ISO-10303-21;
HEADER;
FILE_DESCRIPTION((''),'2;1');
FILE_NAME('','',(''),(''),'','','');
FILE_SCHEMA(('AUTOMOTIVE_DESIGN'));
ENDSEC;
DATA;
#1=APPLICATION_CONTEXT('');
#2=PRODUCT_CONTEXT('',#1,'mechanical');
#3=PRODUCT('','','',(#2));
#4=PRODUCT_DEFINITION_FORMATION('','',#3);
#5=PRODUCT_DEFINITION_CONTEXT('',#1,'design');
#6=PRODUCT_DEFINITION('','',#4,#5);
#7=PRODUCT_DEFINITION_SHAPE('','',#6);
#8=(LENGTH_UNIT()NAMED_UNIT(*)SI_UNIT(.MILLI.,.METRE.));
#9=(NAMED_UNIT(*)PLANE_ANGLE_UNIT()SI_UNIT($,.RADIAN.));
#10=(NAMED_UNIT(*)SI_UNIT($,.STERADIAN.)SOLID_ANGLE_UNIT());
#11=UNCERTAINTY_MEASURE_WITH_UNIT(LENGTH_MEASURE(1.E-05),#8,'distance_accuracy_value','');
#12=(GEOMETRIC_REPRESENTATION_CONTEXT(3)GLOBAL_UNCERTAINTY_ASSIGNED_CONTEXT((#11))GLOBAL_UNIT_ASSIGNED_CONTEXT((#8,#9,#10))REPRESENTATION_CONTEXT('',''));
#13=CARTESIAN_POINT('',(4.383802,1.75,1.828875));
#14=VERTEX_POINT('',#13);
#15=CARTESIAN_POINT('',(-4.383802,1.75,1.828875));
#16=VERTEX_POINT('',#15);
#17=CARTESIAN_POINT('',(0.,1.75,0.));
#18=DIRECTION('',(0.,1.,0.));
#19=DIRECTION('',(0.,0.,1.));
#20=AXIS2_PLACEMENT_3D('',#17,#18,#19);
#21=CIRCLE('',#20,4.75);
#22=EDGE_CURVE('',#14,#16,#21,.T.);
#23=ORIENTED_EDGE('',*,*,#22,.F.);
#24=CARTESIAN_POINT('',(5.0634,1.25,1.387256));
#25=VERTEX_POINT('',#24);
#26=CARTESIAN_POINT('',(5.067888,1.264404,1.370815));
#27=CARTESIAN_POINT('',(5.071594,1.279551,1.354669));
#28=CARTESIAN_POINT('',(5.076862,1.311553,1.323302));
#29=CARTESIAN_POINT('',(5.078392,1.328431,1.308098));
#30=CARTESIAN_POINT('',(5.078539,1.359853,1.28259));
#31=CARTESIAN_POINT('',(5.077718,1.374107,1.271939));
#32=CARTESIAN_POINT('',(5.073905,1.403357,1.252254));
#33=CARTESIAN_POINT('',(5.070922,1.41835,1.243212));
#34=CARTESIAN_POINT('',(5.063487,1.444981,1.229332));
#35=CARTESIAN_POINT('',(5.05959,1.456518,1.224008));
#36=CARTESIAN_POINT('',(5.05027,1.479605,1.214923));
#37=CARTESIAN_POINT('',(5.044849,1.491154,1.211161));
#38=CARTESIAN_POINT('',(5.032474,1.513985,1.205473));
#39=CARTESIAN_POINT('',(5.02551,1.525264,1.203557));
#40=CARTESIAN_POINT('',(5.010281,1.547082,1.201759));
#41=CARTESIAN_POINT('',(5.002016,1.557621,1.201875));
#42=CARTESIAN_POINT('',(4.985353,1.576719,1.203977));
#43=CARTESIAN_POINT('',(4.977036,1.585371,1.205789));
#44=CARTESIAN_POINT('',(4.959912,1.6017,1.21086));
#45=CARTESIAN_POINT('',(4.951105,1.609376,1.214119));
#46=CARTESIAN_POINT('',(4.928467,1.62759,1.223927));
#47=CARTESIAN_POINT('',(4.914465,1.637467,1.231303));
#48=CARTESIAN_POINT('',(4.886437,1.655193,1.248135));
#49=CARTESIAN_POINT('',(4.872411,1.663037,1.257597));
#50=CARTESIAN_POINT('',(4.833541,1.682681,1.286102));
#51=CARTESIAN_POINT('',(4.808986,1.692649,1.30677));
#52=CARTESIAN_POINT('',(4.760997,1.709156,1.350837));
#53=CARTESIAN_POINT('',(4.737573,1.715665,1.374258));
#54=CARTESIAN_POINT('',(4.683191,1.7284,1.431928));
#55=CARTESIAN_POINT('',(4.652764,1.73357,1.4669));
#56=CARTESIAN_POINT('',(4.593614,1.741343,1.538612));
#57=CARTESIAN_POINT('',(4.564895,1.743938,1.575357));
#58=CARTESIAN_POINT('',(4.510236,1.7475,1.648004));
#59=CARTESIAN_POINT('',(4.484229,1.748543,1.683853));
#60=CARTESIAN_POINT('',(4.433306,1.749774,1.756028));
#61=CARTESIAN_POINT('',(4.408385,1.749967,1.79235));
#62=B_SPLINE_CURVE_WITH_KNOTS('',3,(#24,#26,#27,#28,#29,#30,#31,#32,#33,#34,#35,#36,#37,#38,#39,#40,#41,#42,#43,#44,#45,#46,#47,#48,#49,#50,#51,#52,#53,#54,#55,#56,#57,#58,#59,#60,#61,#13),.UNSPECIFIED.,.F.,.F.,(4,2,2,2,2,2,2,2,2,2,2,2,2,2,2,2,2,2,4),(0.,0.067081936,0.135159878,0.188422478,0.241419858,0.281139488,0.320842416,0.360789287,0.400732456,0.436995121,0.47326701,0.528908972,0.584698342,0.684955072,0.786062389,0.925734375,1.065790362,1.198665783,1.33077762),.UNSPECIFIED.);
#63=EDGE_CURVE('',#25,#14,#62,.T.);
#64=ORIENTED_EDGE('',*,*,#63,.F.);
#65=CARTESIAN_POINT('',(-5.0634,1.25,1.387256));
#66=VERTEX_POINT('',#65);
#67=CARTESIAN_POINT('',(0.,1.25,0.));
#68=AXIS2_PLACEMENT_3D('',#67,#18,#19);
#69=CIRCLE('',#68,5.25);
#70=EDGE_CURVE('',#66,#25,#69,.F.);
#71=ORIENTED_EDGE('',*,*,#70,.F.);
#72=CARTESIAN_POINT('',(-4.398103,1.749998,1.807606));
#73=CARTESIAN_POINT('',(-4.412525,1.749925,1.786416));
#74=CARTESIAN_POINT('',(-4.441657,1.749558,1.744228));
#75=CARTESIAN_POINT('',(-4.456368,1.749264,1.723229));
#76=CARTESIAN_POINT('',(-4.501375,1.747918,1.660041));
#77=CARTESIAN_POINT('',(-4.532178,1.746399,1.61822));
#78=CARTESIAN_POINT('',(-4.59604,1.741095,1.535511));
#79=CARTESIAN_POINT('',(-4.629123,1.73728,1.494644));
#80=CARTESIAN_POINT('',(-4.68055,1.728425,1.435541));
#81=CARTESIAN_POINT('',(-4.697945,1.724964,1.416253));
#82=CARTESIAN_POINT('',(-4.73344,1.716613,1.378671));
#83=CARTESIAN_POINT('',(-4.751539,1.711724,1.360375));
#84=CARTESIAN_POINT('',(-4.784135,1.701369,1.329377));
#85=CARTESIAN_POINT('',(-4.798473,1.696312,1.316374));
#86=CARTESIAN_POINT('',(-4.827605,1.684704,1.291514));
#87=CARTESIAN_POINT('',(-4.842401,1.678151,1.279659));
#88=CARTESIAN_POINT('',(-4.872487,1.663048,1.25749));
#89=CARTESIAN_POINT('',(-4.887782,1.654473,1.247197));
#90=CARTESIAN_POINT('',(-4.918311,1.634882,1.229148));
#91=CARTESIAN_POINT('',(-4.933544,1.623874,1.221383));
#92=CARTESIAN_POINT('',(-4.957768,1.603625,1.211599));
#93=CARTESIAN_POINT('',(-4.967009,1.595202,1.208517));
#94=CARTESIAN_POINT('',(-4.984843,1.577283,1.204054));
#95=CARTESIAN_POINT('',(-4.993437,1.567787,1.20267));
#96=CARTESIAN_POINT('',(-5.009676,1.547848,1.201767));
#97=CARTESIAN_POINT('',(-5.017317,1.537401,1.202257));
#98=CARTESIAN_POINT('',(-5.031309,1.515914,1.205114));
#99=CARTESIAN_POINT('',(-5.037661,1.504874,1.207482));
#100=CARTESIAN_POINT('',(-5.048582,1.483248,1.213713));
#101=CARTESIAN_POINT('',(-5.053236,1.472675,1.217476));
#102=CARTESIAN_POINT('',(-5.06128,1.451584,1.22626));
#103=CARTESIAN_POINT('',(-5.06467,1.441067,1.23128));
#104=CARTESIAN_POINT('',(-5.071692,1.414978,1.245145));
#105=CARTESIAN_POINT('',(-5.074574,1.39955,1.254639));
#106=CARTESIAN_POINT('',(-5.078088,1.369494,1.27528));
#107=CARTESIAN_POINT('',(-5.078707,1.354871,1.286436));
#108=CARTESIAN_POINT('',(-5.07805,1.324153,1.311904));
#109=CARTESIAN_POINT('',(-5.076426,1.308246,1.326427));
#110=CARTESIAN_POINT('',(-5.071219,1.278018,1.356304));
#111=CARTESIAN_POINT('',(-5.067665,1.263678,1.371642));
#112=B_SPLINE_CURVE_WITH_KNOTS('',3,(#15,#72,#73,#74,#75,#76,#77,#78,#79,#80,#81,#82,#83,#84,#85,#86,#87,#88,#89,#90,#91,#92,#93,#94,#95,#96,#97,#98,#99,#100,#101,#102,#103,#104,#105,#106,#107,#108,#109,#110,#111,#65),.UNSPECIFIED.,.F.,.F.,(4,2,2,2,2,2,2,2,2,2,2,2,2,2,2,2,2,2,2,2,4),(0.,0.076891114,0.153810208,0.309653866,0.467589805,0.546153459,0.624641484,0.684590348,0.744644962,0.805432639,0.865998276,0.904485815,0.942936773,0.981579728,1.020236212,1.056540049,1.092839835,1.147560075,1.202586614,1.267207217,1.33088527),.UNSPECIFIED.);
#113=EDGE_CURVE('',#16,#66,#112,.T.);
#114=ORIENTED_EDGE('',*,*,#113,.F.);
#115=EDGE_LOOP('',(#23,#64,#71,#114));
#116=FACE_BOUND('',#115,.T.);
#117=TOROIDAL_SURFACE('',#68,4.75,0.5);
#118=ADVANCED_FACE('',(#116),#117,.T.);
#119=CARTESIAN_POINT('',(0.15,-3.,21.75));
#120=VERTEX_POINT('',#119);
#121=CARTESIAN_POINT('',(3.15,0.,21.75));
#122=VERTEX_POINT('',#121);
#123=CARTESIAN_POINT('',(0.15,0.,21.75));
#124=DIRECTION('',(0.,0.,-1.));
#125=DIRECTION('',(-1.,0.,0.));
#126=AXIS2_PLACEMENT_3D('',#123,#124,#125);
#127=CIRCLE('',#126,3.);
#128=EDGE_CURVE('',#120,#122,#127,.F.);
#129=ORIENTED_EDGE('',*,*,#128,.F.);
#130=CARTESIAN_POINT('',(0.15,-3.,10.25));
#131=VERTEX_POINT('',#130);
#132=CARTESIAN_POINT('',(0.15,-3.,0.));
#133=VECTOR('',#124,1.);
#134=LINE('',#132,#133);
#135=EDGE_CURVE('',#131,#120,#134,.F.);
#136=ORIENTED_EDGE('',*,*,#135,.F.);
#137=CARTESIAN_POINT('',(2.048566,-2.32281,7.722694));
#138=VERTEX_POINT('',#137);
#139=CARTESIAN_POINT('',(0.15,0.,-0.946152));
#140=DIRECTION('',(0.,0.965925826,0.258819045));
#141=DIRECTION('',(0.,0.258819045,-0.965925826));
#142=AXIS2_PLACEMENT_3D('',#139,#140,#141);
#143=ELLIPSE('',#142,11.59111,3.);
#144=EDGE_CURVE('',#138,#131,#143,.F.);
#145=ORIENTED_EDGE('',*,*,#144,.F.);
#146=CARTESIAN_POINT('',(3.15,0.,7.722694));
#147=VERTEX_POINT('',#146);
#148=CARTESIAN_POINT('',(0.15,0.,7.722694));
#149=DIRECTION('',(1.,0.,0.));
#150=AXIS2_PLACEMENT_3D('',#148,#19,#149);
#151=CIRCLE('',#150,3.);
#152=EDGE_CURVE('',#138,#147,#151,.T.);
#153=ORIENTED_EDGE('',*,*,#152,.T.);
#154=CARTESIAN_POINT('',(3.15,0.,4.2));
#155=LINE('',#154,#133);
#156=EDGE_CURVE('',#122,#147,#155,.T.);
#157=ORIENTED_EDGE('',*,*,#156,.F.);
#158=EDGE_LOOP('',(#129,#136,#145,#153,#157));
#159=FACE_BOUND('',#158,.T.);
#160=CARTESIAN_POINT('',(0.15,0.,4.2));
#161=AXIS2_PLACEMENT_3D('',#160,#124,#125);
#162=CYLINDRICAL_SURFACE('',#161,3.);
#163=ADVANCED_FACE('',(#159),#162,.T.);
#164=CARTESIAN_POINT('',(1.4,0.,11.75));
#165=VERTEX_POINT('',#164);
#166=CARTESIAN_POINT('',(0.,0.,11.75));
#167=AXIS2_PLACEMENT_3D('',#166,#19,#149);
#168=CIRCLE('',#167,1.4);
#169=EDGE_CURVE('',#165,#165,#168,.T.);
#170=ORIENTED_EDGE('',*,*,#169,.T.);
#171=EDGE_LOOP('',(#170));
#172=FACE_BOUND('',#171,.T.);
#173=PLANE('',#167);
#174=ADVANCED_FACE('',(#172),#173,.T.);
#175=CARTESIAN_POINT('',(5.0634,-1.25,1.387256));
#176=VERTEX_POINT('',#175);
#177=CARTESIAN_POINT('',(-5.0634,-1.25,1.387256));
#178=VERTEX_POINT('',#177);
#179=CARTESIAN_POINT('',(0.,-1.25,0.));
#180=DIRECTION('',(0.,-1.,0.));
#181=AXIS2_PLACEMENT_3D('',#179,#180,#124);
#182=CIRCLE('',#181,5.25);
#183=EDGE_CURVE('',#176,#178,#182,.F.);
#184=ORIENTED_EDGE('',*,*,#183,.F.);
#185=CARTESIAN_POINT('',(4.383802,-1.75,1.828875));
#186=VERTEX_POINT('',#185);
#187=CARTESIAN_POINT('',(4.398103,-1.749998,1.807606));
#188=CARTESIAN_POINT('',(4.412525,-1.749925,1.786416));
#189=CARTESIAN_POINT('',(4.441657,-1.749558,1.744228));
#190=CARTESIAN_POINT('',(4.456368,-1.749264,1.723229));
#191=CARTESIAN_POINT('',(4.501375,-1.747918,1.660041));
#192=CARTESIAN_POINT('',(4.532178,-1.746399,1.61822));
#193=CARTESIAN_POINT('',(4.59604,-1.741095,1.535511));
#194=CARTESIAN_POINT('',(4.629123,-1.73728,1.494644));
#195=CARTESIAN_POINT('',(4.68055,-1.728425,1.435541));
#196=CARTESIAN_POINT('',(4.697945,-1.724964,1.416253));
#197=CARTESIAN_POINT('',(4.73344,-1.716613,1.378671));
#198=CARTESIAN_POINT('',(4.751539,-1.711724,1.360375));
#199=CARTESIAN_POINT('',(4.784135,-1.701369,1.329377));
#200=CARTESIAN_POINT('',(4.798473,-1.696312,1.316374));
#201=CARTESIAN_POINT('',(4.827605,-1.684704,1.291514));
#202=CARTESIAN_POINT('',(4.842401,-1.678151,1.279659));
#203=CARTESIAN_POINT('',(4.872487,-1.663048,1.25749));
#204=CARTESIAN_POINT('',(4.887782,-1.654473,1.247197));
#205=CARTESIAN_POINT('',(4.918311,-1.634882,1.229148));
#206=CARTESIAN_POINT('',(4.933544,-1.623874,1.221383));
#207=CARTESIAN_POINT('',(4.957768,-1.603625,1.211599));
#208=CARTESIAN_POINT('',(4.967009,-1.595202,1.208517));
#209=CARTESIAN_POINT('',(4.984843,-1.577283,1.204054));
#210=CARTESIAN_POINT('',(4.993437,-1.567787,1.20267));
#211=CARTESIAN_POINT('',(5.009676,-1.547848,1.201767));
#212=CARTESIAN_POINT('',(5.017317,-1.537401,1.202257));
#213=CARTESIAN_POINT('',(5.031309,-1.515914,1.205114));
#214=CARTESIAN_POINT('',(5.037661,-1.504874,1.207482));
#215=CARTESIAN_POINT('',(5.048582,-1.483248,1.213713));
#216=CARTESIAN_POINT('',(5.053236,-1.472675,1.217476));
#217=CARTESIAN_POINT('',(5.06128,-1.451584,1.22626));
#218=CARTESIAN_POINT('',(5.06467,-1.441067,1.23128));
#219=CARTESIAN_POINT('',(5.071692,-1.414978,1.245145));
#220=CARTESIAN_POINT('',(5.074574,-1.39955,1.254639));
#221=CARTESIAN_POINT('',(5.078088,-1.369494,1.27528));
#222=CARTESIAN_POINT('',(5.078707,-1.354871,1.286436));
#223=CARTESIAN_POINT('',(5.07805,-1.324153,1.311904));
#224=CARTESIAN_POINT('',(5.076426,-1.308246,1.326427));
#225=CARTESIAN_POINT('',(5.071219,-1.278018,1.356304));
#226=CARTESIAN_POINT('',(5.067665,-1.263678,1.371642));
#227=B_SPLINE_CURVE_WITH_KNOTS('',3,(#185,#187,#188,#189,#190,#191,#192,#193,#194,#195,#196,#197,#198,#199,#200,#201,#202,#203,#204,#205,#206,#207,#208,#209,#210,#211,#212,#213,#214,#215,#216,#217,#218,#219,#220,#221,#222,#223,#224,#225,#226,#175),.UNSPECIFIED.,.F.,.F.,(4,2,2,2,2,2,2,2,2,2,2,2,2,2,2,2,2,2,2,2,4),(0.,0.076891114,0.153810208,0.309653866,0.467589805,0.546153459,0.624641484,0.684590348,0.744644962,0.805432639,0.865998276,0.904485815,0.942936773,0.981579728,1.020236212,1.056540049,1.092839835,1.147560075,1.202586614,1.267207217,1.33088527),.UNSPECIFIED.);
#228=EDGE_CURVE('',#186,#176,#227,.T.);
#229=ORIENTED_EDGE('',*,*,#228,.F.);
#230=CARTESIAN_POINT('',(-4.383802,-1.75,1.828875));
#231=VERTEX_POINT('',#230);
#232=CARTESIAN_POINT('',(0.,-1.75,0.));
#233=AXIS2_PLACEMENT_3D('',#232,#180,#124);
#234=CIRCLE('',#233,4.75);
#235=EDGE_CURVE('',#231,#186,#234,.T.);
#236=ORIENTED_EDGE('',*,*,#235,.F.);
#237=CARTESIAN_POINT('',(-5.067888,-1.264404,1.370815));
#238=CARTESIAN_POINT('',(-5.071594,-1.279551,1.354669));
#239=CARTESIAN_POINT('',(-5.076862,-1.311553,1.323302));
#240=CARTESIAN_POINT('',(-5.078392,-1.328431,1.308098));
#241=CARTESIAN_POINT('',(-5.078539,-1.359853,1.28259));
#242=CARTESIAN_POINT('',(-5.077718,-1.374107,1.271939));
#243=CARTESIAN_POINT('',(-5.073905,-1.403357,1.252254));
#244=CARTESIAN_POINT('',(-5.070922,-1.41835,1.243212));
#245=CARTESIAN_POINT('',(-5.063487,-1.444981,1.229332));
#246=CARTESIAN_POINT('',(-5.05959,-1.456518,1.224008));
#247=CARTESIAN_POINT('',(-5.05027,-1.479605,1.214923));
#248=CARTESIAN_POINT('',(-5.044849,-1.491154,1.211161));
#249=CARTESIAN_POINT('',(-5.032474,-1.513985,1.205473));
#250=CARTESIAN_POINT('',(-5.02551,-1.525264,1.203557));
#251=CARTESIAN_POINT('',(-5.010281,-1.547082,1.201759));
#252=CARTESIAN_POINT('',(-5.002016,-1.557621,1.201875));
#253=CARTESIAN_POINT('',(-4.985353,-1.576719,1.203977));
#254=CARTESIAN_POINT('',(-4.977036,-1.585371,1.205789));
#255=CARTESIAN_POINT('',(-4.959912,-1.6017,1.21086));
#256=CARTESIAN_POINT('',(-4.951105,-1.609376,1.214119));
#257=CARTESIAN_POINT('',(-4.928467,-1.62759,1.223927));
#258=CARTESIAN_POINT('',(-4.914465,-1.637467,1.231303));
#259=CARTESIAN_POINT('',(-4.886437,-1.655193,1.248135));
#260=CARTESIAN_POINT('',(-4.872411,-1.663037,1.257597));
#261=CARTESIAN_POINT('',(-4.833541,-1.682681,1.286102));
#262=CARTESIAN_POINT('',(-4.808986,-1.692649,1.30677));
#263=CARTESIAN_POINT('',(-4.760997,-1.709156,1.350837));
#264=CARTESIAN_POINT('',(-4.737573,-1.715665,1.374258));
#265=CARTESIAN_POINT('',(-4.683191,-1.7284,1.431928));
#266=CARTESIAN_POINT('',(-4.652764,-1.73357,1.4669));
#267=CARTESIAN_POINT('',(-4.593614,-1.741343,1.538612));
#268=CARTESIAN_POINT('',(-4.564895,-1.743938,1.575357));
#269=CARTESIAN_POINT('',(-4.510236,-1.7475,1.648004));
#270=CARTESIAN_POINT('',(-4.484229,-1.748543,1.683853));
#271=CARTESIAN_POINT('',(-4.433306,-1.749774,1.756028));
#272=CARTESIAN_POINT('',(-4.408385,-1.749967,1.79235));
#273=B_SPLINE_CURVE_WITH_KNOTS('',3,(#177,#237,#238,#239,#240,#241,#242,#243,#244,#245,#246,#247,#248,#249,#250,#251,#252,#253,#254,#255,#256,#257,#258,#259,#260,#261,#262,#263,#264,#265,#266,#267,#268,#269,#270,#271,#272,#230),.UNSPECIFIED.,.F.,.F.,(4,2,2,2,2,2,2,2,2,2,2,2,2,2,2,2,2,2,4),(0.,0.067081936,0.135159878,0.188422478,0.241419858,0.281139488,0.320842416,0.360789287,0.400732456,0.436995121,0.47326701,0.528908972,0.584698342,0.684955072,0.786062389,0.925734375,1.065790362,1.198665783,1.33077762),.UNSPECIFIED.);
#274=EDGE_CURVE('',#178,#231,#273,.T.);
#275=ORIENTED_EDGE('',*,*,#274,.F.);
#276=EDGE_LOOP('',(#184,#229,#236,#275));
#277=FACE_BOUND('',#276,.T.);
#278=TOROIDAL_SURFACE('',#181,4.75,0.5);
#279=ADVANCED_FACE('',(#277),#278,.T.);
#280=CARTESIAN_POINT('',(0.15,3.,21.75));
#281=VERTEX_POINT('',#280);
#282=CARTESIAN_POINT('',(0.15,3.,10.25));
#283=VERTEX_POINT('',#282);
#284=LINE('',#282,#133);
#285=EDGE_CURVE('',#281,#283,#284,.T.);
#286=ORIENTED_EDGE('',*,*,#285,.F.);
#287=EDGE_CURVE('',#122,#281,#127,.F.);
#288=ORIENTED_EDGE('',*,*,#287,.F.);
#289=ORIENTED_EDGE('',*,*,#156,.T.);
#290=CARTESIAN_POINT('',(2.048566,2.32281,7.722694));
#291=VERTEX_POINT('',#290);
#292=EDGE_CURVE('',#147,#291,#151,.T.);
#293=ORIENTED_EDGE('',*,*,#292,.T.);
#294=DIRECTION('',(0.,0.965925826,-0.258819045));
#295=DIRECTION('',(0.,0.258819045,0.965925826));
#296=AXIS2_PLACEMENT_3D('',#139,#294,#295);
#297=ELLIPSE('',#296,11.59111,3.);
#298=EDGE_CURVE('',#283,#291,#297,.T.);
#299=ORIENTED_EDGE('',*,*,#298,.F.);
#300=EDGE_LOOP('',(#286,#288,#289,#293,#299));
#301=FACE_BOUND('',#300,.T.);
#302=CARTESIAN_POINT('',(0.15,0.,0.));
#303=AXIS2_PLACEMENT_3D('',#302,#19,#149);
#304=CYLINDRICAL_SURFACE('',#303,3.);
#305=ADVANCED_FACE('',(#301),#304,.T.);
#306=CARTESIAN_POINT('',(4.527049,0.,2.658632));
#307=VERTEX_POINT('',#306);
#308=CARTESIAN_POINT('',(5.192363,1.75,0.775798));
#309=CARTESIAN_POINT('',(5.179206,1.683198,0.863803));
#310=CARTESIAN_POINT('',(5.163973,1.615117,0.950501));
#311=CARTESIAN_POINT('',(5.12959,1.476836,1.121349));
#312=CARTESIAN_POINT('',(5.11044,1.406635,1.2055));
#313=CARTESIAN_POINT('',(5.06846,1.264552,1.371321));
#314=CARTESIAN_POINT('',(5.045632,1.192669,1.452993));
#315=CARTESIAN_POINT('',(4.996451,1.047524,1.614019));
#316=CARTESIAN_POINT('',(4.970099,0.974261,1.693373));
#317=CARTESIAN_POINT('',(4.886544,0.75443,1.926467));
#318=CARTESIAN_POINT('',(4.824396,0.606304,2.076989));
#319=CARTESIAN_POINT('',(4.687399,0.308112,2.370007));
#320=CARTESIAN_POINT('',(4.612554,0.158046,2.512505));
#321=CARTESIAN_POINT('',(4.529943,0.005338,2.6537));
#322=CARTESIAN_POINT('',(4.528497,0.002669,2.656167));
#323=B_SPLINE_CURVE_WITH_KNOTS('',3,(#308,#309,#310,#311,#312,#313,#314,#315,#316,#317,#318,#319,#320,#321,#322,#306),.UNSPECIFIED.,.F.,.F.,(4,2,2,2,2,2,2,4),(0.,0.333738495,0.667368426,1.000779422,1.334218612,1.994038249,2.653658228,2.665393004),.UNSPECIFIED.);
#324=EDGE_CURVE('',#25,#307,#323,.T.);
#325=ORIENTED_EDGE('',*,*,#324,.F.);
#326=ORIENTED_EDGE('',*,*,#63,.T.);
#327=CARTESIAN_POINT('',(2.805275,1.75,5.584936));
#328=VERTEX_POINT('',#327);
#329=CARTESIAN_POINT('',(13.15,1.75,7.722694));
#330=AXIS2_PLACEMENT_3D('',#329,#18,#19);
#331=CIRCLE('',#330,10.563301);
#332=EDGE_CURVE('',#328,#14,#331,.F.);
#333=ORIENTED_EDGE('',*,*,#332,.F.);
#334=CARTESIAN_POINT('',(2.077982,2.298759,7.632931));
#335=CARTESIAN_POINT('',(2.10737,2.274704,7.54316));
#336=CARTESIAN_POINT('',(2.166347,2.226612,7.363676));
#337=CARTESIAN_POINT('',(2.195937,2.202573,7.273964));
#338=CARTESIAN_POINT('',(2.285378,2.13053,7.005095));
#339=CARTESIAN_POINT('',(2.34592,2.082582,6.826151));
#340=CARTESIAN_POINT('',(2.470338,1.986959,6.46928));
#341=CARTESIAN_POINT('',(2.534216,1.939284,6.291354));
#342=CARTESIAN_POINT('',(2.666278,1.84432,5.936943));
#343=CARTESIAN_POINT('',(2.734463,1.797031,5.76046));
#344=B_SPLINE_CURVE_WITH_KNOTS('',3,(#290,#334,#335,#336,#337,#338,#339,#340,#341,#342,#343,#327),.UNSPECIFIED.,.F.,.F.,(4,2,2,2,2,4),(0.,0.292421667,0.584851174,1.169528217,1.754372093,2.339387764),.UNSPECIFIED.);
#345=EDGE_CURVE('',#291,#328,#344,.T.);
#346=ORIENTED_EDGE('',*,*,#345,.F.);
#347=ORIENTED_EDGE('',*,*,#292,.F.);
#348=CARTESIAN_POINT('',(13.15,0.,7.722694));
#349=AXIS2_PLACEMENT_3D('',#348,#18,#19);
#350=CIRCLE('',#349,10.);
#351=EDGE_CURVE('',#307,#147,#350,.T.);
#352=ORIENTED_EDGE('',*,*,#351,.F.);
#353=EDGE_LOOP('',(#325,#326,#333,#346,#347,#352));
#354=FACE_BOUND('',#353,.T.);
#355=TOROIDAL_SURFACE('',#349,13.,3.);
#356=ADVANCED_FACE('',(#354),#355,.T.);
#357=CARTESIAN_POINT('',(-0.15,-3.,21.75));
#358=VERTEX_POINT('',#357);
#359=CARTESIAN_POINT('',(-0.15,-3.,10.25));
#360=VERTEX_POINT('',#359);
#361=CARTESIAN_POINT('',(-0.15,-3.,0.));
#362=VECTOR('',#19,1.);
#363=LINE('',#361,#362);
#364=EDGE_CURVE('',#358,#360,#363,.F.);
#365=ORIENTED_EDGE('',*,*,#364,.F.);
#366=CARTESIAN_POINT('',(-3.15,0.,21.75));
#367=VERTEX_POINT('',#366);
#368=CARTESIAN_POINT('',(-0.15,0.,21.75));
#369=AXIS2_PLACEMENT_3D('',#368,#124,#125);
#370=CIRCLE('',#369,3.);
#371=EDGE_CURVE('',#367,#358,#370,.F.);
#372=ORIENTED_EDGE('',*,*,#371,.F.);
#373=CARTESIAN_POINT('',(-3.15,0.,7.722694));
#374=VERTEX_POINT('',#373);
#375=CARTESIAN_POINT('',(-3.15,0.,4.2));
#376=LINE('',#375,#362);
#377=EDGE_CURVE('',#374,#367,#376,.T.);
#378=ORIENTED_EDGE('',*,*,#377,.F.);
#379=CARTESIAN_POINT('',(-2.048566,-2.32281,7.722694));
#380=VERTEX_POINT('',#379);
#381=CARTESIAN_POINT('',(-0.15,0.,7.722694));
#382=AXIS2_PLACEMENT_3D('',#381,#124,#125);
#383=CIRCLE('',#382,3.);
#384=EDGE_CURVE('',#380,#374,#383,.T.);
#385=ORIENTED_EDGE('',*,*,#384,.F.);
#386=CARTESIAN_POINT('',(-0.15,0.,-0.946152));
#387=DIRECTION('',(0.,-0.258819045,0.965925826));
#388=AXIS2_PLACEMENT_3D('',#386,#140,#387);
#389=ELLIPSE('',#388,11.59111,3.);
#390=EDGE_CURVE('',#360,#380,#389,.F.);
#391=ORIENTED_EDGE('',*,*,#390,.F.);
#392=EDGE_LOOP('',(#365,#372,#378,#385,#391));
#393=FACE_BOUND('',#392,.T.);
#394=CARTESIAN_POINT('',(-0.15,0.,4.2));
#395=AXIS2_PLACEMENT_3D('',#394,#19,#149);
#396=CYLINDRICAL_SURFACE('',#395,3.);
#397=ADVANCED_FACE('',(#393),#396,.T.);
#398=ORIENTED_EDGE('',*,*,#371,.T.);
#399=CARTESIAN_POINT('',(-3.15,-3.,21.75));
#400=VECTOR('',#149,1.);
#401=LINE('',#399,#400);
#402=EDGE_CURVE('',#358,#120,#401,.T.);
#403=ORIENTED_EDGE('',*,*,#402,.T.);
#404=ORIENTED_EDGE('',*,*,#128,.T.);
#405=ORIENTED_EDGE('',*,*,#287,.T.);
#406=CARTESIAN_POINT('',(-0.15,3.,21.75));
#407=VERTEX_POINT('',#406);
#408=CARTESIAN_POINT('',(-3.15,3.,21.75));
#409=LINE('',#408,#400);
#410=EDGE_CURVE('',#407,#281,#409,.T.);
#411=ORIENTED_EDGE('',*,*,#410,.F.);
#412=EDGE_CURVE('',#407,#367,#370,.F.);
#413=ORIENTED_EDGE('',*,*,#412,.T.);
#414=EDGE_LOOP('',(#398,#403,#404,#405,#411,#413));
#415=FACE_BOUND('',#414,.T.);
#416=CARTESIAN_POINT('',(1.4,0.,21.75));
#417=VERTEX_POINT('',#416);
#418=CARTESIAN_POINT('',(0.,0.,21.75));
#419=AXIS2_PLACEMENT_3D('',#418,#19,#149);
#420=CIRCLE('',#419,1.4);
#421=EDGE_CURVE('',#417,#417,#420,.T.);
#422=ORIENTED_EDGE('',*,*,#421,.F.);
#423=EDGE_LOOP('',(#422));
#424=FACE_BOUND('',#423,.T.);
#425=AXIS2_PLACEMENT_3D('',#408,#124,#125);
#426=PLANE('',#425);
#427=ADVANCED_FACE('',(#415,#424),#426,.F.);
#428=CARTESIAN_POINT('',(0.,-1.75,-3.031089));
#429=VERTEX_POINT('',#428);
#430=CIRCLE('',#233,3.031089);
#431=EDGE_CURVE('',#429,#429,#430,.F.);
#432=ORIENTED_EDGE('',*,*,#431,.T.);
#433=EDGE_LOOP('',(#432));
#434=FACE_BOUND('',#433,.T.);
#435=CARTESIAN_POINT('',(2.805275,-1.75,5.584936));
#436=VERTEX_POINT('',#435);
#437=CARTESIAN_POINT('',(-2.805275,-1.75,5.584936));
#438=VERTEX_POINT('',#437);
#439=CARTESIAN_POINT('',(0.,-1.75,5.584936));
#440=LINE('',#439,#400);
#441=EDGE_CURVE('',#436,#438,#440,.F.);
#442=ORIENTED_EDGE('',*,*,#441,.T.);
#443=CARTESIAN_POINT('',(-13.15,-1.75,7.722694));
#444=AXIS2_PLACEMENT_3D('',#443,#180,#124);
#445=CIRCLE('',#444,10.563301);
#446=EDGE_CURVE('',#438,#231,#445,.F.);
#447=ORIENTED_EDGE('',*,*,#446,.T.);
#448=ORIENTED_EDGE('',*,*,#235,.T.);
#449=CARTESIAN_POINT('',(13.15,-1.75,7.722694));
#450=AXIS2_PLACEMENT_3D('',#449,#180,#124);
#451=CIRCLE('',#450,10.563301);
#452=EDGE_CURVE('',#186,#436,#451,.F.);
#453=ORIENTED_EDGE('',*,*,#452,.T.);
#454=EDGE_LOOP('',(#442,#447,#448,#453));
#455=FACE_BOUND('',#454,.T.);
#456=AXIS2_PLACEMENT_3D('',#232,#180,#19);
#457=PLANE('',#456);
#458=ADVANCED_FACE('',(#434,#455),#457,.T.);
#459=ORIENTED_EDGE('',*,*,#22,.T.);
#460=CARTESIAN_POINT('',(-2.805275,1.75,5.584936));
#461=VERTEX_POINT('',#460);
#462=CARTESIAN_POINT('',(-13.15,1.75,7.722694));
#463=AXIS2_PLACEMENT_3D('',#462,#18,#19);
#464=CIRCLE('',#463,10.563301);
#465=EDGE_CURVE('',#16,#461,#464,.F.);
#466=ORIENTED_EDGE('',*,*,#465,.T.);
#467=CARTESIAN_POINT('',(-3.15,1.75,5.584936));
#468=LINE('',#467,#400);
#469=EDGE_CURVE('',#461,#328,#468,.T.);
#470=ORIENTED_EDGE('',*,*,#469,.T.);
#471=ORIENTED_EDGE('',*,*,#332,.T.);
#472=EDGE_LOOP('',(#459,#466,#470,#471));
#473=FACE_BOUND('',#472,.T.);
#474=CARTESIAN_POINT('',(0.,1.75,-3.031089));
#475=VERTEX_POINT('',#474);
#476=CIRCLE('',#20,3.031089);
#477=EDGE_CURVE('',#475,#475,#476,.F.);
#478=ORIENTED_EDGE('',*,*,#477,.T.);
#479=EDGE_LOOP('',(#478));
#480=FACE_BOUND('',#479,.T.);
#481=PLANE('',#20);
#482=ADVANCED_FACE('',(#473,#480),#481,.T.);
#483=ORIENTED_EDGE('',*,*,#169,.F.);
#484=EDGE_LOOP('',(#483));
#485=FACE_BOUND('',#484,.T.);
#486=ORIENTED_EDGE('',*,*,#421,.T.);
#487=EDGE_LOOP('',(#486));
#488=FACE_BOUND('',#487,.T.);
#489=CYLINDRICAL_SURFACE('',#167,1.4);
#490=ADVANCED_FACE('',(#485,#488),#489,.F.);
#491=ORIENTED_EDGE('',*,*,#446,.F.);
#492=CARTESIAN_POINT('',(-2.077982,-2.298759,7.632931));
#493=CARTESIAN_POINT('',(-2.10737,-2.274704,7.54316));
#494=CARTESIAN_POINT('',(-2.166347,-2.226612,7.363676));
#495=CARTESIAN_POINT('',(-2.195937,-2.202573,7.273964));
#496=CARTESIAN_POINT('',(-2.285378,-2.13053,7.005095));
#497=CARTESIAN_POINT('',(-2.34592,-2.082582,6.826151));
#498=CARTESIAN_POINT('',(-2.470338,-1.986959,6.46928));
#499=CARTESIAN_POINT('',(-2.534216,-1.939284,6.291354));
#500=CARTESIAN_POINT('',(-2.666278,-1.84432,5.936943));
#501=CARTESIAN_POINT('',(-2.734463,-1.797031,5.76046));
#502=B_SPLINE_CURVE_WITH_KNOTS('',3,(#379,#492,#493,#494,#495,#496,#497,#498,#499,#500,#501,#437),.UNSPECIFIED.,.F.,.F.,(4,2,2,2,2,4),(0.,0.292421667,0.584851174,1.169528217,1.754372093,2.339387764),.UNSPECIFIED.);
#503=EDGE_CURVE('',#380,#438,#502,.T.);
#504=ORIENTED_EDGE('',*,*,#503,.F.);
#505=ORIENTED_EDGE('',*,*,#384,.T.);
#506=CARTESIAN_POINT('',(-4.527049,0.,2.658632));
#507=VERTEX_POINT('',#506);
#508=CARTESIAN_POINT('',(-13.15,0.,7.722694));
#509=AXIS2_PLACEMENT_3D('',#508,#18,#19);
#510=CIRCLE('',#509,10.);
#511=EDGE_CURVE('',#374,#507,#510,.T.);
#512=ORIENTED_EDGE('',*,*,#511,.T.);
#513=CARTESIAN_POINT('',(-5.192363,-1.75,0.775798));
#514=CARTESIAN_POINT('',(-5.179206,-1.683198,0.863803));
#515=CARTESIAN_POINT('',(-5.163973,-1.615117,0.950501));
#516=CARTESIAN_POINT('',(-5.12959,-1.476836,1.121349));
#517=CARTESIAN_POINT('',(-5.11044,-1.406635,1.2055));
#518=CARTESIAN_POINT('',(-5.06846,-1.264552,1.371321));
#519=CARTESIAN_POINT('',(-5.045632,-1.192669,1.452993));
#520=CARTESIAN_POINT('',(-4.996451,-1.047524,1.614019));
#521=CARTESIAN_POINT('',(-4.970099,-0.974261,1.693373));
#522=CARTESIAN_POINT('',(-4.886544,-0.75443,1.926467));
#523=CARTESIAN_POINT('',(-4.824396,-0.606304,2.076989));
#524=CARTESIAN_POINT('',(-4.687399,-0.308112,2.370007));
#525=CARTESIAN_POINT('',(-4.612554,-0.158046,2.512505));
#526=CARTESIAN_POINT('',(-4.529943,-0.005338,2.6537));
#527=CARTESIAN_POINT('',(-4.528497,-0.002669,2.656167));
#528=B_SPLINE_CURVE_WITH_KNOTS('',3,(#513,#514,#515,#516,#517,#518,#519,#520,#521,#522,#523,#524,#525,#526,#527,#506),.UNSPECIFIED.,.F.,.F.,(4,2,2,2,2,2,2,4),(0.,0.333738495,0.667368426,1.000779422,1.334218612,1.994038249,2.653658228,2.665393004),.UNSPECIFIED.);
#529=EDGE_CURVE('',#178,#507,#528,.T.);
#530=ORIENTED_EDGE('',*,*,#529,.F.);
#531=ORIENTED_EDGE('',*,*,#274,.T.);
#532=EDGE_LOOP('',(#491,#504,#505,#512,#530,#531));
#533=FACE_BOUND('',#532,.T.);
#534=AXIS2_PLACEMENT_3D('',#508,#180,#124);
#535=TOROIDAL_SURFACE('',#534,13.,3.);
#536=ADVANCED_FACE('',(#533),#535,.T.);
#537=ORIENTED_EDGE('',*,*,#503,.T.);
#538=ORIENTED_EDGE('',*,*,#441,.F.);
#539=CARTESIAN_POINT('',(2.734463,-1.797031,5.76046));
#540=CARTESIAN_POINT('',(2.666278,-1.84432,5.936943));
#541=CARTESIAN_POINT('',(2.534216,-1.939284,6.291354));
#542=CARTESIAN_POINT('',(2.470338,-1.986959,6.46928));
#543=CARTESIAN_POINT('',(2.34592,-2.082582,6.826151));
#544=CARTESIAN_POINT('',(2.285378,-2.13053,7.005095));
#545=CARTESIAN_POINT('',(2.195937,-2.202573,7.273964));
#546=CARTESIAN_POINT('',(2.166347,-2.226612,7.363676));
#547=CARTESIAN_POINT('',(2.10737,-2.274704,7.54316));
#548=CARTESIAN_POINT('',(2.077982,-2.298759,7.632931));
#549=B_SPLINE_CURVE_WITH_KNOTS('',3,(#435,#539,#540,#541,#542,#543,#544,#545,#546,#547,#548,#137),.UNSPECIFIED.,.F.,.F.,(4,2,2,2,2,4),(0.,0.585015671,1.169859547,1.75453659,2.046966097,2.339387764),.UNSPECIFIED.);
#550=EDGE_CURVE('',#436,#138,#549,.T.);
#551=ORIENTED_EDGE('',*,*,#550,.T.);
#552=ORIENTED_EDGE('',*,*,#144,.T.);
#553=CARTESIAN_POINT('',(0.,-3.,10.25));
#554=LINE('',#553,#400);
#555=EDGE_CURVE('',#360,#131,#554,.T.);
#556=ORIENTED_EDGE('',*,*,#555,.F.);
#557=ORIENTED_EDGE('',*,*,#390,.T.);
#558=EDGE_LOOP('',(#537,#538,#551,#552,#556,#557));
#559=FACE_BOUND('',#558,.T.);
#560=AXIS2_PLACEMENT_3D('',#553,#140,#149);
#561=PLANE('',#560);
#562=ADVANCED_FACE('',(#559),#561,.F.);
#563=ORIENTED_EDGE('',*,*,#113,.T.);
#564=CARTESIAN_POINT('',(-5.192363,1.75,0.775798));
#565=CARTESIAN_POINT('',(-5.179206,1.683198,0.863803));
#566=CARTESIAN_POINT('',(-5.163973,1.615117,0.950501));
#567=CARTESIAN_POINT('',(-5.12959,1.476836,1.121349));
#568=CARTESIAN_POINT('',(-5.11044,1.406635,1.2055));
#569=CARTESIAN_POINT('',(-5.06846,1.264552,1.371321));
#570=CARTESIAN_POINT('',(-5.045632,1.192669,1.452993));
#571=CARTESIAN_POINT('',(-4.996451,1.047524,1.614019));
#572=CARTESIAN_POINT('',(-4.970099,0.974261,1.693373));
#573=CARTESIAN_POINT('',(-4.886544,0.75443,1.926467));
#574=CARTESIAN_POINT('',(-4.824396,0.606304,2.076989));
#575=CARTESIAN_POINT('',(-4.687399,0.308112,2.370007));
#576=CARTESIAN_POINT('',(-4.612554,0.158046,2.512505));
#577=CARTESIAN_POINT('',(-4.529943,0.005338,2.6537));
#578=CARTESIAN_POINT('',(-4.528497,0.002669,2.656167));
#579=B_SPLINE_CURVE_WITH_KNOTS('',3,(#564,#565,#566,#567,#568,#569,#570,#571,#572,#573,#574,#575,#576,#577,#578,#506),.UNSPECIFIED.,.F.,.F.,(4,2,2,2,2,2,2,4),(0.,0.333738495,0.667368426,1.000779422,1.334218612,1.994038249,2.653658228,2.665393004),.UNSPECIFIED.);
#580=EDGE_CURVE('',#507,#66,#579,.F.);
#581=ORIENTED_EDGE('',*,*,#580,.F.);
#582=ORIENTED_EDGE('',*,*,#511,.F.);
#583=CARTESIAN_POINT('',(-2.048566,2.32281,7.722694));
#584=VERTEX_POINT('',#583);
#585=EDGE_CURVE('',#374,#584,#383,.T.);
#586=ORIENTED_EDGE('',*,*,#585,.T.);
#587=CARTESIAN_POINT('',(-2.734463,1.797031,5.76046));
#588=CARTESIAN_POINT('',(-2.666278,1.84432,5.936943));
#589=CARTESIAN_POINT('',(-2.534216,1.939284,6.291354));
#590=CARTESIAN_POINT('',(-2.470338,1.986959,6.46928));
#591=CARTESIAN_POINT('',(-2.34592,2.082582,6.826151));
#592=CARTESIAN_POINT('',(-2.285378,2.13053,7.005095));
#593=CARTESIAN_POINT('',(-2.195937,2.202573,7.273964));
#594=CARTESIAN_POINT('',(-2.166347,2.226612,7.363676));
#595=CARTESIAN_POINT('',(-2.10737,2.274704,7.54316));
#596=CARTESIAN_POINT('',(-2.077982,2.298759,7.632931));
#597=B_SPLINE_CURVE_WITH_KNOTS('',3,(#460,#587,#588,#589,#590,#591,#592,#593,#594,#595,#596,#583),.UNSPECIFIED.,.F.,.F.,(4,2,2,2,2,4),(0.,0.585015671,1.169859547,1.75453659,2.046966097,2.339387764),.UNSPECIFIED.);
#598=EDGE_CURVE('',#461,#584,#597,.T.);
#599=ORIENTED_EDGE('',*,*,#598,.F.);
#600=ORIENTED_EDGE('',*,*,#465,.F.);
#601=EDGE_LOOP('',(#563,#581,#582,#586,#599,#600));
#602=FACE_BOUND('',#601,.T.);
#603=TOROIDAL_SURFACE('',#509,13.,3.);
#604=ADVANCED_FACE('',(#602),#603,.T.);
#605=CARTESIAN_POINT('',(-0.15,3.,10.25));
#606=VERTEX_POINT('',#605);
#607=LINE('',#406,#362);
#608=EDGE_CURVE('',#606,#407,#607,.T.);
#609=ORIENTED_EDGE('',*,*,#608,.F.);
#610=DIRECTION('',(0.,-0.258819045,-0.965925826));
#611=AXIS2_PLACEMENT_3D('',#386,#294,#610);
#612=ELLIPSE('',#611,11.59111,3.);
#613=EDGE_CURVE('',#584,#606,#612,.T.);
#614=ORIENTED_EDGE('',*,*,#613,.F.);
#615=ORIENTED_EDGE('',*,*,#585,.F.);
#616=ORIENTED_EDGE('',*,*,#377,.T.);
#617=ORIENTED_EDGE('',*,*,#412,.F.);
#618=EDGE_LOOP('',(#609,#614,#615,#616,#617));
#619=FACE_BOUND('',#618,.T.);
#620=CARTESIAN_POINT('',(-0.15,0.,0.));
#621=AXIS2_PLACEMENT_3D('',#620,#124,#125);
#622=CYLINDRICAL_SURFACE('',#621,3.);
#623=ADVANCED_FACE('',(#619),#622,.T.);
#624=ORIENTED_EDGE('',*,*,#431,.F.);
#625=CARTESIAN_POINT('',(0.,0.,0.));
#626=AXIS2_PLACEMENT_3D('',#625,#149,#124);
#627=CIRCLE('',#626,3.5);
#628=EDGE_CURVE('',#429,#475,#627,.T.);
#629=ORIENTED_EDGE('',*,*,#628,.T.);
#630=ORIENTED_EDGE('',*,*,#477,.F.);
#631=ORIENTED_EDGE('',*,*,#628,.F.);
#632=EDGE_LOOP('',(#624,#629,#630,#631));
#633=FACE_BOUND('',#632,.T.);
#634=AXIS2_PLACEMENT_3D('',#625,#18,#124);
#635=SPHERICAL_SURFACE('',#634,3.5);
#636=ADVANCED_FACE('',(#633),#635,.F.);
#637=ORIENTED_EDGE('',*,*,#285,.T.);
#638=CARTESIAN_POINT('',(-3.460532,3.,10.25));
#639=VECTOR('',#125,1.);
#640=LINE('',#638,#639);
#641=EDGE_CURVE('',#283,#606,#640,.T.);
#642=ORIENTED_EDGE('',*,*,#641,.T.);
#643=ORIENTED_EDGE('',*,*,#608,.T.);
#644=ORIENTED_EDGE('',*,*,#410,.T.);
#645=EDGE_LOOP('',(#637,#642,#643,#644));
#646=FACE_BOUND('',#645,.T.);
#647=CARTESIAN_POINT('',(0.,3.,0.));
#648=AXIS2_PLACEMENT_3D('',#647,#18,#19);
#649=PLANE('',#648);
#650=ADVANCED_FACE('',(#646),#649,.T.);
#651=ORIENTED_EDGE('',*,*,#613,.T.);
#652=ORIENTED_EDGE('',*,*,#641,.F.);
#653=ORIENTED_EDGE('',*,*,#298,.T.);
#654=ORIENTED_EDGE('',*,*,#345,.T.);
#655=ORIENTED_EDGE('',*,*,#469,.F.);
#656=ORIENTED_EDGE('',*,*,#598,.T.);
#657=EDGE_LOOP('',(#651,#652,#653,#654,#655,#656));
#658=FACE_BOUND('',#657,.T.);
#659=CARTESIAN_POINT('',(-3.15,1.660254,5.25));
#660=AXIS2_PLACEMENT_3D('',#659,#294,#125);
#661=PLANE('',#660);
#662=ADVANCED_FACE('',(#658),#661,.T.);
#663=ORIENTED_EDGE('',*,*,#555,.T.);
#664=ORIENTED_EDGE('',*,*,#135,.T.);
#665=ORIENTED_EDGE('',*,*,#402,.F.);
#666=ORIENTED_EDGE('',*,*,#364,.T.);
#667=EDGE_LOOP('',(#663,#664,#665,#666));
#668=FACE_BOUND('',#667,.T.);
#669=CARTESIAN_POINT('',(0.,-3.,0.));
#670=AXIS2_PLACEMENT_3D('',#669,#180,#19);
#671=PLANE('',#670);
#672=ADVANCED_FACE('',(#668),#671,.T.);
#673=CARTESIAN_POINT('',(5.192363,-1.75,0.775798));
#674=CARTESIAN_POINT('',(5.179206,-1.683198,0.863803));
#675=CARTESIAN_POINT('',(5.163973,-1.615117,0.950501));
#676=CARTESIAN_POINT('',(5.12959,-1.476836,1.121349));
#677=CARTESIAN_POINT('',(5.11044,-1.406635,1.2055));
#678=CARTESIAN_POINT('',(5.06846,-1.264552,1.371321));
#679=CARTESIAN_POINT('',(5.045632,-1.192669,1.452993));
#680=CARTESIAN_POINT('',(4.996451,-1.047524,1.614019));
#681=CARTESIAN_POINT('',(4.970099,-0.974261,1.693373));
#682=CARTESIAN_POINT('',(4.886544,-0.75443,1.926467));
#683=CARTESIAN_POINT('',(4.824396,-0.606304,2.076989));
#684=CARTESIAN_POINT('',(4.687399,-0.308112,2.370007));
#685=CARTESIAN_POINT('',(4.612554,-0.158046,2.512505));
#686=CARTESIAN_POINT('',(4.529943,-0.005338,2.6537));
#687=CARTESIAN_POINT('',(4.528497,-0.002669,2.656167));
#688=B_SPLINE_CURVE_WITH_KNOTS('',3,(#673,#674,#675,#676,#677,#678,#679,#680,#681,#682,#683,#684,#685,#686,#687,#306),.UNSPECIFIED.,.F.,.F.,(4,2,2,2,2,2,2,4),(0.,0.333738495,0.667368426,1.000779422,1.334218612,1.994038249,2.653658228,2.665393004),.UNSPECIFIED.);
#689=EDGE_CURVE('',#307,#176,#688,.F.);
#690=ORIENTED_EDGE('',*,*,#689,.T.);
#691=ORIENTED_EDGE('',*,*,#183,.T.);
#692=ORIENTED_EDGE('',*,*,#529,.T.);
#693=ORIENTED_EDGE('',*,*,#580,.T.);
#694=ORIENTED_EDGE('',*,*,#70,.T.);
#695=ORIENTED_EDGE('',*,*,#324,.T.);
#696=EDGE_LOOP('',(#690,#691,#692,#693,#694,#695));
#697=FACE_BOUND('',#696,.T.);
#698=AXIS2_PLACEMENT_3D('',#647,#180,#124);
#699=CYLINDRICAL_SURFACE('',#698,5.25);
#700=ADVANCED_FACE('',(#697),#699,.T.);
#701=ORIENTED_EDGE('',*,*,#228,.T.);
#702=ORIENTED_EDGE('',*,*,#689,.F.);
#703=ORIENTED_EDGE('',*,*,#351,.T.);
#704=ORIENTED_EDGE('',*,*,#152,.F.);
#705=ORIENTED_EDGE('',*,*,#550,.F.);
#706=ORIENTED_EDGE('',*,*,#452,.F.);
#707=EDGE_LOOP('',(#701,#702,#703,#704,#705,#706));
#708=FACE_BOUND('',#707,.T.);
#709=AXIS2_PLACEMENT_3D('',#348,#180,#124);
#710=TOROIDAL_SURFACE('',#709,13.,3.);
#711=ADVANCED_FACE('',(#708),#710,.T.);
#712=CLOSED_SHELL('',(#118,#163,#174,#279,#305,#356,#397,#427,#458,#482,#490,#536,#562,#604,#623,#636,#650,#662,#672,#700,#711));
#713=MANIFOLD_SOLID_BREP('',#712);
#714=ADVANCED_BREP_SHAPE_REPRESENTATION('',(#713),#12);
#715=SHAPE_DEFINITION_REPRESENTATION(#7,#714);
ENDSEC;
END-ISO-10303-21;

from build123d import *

# Parameters (mm, degrees)
BOSS_EXTRUDE1_DEPTH = 3
CUT_EXTRUDE1_START  = -1.25
CUT_EXTRUDE1_DEPTH  = 1.25
FILLET2_R           = 10
CHAMFER1_SIZE       = 5
CHAMFER1_SIZE_2     = 1.339745962
FILLET3_START       = 7.722693831
FILLET3_DEPTH       = 14.027306169
FILLET3_2_ANGLE     = 41.120463
FILLET3_3_ANGLE     = 41.120463
FILLET4_R           = 0.5
SKETCH10_R          = 1.4
CUT_EXTRUDE3_DEPTH  = 10


with BuildPart() as part:
    # Sketch1 → Boss-Extrude1 (new body)
    with BuildSketch(Plane(origin=(0, 0, 0), x_dir=(1, 0, 0), z_dir=(0, 1, 0))):
        with BuildLine():
            Line((-3.15, -4.2), (-3.15, -21.75))
            Line((-3.15, -21.75), (3.15, -21.75))
            Line((3.15, -21.75), (3.15, -4.2))
            ThreePointArc((3.15, -4.2), (0, 5.25), (-3.15, -4.2))
        make_face()
    extrude(amount=BOSS_EXTRUDE1_DEPTH)

    # Sketch2 → Cut-Extrude1 (cut)
    with BuildSketch(Plane(origin=(0, 3, 0), x_dir=(1, 0, 0), z_dir=(0, 1, 0)).offset(CUT_EXTRUDE1_START)):
        with BuildLine():
            Line((-3.15, -4.2), (-3.15, -5.25))
            Line((-3.15, -5.25), (3.15, -5.25))
            Line((3.15, -5.25), (3.15, -4.2))
            ThreePointArc((3.15, -4.2), (0, 5.25), (-3.15, -4.2))
        make_face()
    extrude(amount=CUT_EXTRUDE1_DEPTH, mode=Mode.SUBTRACT)

    # Cut-Sweep1: sweep along a path in Sketch9
    with BuildLine(Plane(origin=(0, 0, 0), x_dir=(1, 0, 0), z_dir=(0, 1, 0))) as cut_sweep1_path:
        CenterArc((0, 0), 3.5, 0, 360)
    # Sketch8 → Cut-Sweep1 (sweep, cut)
    with BuildSketch(Plane(origin=(0, 0, 0), x_dir=(0, 0, -1), z_dir=(1, 0, 0))):
        with BuildLine():
            Line((0, 3.5), (0, 0))
            Line((0, 0), (3.5, 0))
            ThreePointArc((3.5, 0), (2.474873734, 2.474873734), (0, 3.5))
        make_face()
    sweep(path=cut_sweep1_path.line, mode=Mode.SUBTRACT)

    # Fillet2
    # the kernel refuses this fillet: 10 mm, written as the material it adds along each edge
    with BuildSketch(Plane(origin=(-3.15, 0, 4.2), x_dir=(0, 0, 1), z_dir=(0, 1, 0))) as fillet2_piece_1_section:
        with BuildLine():
            CenterArc((3.522693831, -10), FILLET2_R, 90, 30.424740483)
            ThreePointArc((-1.541367698, -1.37704918), (-0.702247096, -0.765127664), (0, 0))
            Line((0, 0), (3.522693831, 0))
        make_face()
    fillet2_piece_1 = extrude(amount=1.75, mode=Mode.PRIVATE)
    fillet2_piece_1 = split(fillet2_piece_1, bisect_by=Plane(origin=(-3.15, 0, 5.25), z_dir=(0, 0, 1)), keep=Keep.TOP, mode=Mode.PRIVATE)
    add(fillet2_piece_1)
    with BuildSketch(Plane(origin=(-3.15, 0, 4.2), x_dir=(0, 0, 1), z_dir=(0, 1, 0))) as fillet2_piece_2_section:
        with BuildLine():
            CenterArc((3.522693831, -10), FILLET2_R, 90, 30.424740483)
            ThreePointArc((-1.541367698, -1.37704918), (-0.702247096, -0.765127664), (0, 0))
            Line((0, 0), (3.522693831, 0))
        make_face()
    fillet2_piece_2 = extrude(amount=1.75, mode=Mode.PRIVATE)
    fillet2_piece_2 = split(fillet2_piece_2, bisect_by=Plane(origin=(-3.15, 0, 5.25), z_dir=(0, 0, -1)), keep=Keep.TOP, mode=Mode.PRIVATE)
    add(fillet2_piece_2)
    with BuildSketch(Plane(origin=(-3.15, 0, 4.2), x_dir=(0, 0, 1), z_dir=(0, 1, 0))) as fillet2_piece_3_section:
        with BuildLine():
            CenterArc((3.522693831, -10), FILLET2_R, 90, 30.424740483)
            ThreePointArc((-1.541367698, -1.37704918), (-0.702247096, -0.765127664), (0, 0))
            Line((0, 0), (3.522693831, 0))
        make_face()
    fillet2_piece_3 = extrude(amount=10.556734576, mode=Mode.PRIVATE)
    fillet2_piece_3 = split(fillet2_piece_3, bisect_by=Plane(origin=(-3.15, 3, 4.2), z_dir=(0, -1, 0)), keep=Keep.TOP, mode=Mode.PRIVATE)
    fillet2_piece_3 = split(fillet2_piece_3, bisect_by=Plane(origin=(-3.15, 0, 5.25), z_dir=(0, 0, 1)), keep=Keep.TOP, mode=Mode.PRIVATE)
    fillet2_piece_3 = split(fillet2_piece_3, bisect_by=Plane(origin=(-3.15, 1.75, 4.2), z_dir=(0, 1, 0)), keep=Keep.TOP, mode=Mode.PRIVATE)
    add(fillet2_piece_3)
    with BuildSketch(Plane(origin=(3.15, 0, 4.2), x_dir=(0.6662386483372984, 0, -0.7457386026361313), z_dir=(0, 1, 0))) as fillet2_piece_4_section:
        with BuildLine():
            CenterArc((4.035377709, -9.804340803), FILLET2_R, 101.352680936, 30.424740483)
            Line((-2.627008775, -2.346954776), (0, 0))
            ThreePointArc((0, 0), (1.033450389, -0.102721079), (2.066900778, 0))
        make_face()
    fillet2_piece_4 = extrude(amount=1.75, mode=Mode.PRIVATE)
    fillet2_piece_4 = split(fillet2_piece_4, bisect_by=Plane(origin=(3.15, 0, 5.25), z_dir=(0, 0, -1)), keep=Keep.TOP, mode=Mode.PRIVATE)
    add(fillet2_piece_4)
    with BuildSketch(Plane(origin=(3.15, 0, 4.2), x_dir=(0.6662386483372984, 0, -0.7457386026361313), z_dir=(0, 1, 0))) as fillet2_piece_5_section:
        with BuildLine():
            CenterArc((4.035377709, -9.804340803), FILLET2_R, 101.352680936, 30.424740483)
            Line((-2.627008775, -2.346954776), (0, 0))
            ThreePointArc((0, 0), (1.033450389, -0.102721079), (2.066900778, 0))
        make_face()
    fillet2_piece_5 = extrude(amount=1.75, mode=Mode.PRIVATE)
    fillet2_piece_5 = split(fillet2_piece_5, bisect_by=Plane(origin=(3.15, 0, 5.25), z_dir=(0, 0, 1)), keep=Keep.TOP, mode=Mode.PRIVATE)
    add(fillet2_piece_5)
    with BuildSketch(Plane(origin=(3.15, 0, 4.2), x_dir=(0.6662386483372984, 0, -0.7457386026361313), z_dir=(0, 1, 0))) as fillet2_piece_6_section:
        with BuildLine():
            CenterArc((4.035377709, -9.804340803), FILLET2_R, 101.352680936, 30.424740483)
            Line((-2.627008775, -2.346954776), (0, 0))
            ThreePointArc((0, 0), (1.033450389, -0.102721079), (2.066900778, 0))
        make_face()
    fillet2_piece_6 = extrude(amount=10.556734576, mode=Mode.PRIVATE)
    fillet2_piece_6 = split(fillet2_piece_6, bisect_by=Plane(origin=(3.15, 3, 4.2), z_dir=(0, -1, 0)), keep=Keep.TOP, mode=Mode.PRIVATE)
    fillet2_piece_6 = split(fillet2_piece_6, bisect_by=Plane(origin=(3.15, 0, 5.25), z_dir=(0, 0, 1)), keep=Keep.TOP, mode=Mode.PRIVATE)
    fillet2_piece_6 = split(fillet2_piece_6, bisect_by=Plane(origin=(3.15, 1.75, 4.2), z_dir=(0, 1, 0)), keep=Keep.TOP, mode=Mode.PRIVATE)
    add(fillet2_piece_6)

    # Chamfer1
    # the kernel refuses this chamfer: 5, 1.339745962 mm, written as the material it takes off along each edge
    with BuildSketch(Plane(origin=(16.444140104, 3, 5.25), x_dir=(0, 0, 1), z_dir=(-1, 0, 0))) as chamfer1_piece_1_section:
        Polygon((CHAMFER1_SIZE, 0), (0, -CHAMFER1_SIZE_2), (0, 0), align=None)
    chamfer1_piece_1 = extrude(amount=32.888280208, mode=Mode.PRIVATE)
    chamfer1_piece_1 = split(chamfer1_piece_1, bisect_by=Plane(origin=(16.444140104, 1.75, 5.25), z_dir=(0, 1, 0)), keep=Keep.TOP, mode=Mode.PRIVATE)
    add(chamfer1_piece_1, mode=Mode.SUBTRACT)

    # Fillet3: read off the stored shape, not the designer's step
    # Fillet3 outline → Fillet3 (cut)
    with BuildSketch(Plane.XY.offset(FILLET3_START)):
        with BuildLine():
            ThreePointArc((-3.15, 0), (-2.271320344, 2.121320344), (-0.15, 3))
            Line((-0.15, 3), (-3.15, 3))
            Line((-3.15, 3), (-3.15, 0))
        make_face()
        with BuildLine():
            Line((3.15, 0), (3.15, 3))
            Line((3.15, 3), (0.15, 3))
            ThreePointArc((0.15, 3), (2.271320344, 2.121320344), (3.15, 0))
        make_face()
    extrude(amount=FILLET3_DEPTH, mode=Mode.SUBTRACT)

    # Fillet3 2 outline → Fillet3 2 (revolve, cut)
    with BuildSketch(Plane(origin=(-13.15, 0, 7.722693831), x_dir=(1, 0, 0), z_dir=(0, 0, 1))):
        with BuildLine():
            ThreePointArc((10, 0), (10.289308449, 1.285360382), (11.101434209, 2.322810353))
            Line((11.101434209, 2.322810353), (10, 2.322810353))
            Line((10, 2.322810353), (10, 0))
        make_face()
    revolve(axis=Axis((-13.15, 0, 7.722693831), (0, 1, 0)), revolution_arc=FILLET3_2_ANGLE, mode=Mode.SUBTRACT)

    # Fillet3 3 outline → Fillet3 3 (revolve, cut)
    with BuildSketch(Plane(origin=(13.15, 0, 7.722693831), x_dir=(-0.7533285646584991, 0, -0.6576443367577688), z_dir=(0.6576443367577688, 0, -0.7533285646584991))):
        with BuildLine():
            ThreePointArc((10, 0), (10.289308449, 1.285360382), (11.101434209, 2.322810353))
            Line((11.101434209, 2.322810353), (10, 2.322810353))
            Line((10, 2.322810353), (10, 0))
        make_face()
    revolve(axis=Axis((13.15, 0, 7.722693831), (0, 1, 0)), revolution_arc=FILLET3_3_ANGLE, mode=Mode.SUBTRACT)

    # Fillet4
    fillet4_edges = [part.edges().sort_by_distance(p)[0] for p in [
        (-1e-09, 1.75, -5.25),
    ]]
    fillet(fillet4_edges, radius=FILLET4_R)

    # Mirror2: read off the stored shape, not the designer's step
    # Mirror2: part across plane


with BuildPart() as part_1:
    add(part.part)
    add(part.part.mirror(Plane.ZX))

    # Sketch10 → Cut-Extrude3 (cut)
    with BuildSketch(Plane.XY.offset(21.75)):
        Circle(SKETCH10_R)
    extrude(amount=-CUT_EXTRUDE3_DEPTH, mode=Mode.SUBTRACT)


solid = part_1.part
